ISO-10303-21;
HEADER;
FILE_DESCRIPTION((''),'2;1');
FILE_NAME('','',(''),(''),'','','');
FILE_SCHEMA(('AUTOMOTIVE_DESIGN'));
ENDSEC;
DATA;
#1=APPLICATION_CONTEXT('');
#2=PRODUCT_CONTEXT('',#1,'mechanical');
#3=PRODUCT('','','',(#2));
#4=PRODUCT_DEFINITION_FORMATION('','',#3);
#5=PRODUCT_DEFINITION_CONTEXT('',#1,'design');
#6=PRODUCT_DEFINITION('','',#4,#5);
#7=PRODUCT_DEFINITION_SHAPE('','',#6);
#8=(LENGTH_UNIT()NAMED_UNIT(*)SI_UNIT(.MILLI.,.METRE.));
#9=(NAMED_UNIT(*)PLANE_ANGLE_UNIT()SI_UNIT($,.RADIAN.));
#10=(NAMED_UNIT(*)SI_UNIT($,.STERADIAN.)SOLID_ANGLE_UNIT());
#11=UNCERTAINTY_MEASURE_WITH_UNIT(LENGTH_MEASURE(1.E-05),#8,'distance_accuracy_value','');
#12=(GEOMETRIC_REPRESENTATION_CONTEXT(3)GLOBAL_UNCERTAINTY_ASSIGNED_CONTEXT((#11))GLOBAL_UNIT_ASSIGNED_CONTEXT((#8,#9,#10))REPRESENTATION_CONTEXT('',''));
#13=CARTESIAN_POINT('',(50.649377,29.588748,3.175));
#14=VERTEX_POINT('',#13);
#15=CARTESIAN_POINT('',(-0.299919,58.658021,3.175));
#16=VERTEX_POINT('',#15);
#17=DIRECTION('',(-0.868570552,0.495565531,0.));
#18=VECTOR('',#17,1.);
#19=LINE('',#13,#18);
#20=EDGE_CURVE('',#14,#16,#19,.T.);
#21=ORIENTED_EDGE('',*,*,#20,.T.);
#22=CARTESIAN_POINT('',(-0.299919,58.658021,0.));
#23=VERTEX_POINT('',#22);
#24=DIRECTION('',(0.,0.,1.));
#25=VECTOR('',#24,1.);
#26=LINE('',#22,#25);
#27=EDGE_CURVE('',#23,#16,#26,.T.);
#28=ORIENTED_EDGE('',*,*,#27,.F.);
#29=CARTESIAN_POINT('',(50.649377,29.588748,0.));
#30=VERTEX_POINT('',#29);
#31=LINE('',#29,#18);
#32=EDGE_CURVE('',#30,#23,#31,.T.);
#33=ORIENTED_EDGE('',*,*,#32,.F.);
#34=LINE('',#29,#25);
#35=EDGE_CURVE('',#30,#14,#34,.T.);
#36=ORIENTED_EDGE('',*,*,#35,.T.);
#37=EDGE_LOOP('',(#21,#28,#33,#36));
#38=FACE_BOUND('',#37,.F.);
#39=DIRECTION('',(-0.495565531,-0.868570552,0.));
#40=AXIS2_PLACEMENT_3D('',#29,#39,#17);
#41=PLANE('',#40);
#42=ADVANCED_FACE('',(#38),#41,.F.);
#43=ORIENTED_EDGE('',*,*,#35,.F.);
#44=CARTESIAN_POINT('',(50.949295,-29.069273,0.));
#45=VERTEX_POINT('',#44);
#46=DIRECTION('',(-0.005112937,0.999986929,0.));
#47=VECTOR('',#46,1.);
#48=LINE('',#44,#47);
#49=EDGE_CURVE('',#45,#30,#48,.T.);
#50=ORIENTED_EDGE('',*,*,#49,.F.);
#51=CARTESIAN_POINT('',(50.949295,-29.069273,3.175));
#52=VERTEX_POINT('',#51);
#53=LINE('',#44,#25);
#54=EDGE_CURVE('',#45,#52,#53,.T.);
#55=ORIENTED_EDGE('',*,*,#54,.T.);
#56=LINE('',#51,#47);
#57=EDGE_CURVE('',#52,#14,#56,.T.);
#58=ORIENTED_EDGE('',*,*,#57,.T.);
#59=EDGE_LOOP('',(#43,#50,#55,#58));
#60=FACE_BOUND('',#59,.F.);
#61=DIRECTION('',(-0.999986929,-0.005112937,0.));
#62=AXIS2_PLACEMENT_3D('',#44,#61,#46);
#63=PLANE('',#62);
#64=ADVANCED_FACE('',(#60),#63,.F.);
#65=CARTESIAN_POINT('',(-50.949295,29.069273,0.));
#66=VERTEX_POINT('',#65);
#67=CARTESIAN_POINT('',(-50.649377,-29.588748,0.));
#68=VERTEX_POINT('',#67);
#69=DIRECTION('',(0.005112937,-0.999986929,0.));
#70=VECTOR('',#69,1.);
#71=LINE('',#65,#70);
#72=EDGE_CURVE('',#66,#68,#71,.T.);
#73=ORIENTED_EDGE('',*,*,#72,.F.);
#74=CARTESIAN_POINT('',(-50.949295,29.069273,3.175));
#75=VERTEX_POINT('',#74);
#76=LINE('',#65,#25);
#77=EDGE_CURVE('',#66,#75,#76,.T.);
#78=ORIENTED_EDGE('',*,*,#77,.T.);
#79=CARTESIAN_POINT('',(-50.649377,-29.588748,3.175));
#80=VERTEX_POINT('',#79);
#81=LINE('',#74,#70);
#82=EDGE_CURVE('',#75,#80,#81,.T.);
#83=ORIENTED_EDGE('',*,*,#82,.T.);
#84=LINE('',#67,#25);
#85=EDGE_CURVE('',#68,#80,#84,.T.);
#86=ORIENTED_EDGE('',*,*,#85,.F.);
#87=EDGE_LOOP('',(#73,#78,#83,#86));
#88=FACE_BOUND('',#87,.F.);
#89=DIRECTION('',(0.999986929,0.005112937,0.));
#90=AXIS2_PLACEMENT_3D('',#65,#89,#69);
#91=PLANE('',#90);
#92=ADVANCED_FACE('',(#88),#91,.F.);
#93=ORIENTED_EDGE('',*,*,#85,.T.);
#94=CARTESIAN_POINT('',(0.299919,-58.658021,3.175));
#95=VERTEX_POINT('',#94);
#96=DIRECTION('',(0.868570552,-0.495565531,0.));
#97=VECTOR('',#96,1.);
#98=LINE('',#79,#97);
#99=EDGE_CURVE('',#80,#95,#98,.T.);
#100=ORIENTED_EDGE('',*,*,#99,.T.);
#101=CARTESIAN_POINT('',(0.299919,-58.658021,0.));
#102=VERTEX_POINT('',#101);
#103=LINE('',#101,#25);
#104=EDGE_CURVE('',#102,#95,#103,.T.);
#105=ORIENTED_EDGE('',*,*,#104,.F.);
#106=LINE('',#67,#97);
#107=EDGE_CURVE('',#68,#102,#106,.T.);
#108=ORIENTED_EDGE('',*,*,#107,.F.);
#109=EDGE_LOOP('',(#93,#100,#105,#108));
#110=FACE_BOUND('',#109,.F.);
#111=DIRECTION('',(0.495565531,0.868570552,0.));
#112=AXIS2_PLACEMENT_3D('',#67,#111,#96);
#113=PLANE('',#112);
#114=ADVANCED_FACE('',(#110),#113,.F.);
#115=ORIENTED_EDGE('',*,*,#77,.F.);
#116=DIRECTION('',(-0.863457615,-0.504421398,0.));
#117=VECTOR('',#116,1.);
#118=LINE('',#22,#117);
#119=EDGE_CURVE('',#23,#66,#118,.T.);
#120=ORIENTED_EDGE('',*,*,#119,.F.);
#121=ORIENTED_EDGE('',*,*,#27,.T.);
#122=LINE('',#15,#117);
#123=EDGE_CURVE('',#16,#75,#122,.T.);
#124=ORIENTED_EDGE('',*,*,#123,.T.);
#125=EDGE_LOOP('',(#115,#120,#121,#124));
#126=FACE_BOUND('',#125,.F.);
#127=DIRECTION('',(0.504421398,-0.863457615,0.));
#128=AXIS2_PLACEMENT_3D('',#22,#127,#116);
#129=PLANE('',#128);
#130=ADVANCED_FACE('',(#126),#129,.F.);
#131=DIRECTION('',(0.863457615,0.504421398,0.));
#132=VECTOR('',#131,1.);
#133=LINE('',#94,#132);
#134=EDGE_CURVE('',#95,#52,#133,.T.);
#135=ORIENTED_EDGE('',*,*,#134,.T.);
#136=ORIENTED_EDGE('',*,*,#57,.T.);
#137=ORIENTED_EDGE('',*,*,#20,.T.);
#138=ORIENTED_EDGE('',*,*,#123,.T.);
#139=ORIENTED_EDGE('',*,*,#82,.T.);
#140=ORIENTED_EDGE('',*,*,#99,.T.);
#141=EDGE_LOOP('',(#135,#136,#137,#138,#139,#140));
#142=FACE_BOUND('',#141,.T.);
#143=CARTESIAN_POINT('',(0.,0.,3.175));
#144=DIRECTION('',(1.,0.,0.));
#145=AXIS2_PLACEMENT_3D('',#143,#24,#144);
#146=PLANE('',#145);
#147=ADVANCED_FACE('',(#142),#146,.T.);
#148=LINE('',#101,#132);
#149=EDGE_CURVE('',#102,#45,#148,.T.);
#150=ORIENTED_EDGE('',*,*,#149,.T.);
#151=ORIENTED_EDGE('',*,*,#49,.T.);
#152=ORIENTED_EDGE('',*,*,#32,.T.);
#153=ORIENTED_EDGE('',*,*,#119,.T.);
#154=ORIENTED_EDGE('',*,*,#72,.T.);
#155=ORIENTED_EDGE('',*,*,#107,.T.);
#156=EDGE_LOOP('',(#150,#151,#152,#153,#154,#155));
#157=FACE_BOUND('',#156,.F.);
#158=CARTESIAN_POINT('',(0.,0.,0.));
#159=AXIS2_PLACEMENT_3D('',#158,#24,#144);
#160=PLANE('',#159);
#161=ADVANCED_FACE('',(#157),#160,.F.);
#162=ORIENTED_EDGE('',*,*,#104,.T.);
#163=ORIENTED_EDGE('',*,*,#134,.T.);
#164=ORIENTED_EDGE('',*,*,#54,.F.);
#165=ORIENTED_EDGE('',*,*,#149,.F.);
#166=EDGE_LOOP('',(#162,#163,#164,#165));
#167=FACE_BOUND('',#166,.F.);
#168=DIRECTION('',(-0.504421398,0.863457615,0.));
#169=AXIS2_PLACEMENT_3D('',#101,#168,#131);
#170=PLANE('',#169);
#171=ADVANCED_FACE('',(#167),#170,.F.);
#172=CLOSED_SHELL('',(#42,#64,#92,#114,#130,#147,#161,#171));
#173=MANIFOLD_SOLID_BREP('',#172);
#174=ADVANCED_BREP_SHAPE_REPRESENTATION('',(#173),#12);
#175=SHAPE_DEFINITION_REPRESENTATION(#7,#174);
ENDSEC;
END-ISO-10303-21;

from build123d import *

# Parameters (mm, degrees)
F1_DEPTH = 3.175


# Not quite as in the source:
# - a length typed as a fraction of an inch, garbled in the dataset ("3 / 203.2 mm" for 3/8 in), is restored


with BuildPart() as f1:
    # F0 (on Top) → F1 (new body)
    with BuildSketch(Plane.XY):
        Polygon((-0.2999186872, 58.658020612), (-50.9492953293, 29.0692731038), (-50.6493766421, -29.5887475082), (0.2999186872, -58.658020612), (50.9492953293, -29.0692731038), (50.6493766421, 29.5887475082), align=None)
    extrude(amount=F1_DEPTH)


solid = f1.part
